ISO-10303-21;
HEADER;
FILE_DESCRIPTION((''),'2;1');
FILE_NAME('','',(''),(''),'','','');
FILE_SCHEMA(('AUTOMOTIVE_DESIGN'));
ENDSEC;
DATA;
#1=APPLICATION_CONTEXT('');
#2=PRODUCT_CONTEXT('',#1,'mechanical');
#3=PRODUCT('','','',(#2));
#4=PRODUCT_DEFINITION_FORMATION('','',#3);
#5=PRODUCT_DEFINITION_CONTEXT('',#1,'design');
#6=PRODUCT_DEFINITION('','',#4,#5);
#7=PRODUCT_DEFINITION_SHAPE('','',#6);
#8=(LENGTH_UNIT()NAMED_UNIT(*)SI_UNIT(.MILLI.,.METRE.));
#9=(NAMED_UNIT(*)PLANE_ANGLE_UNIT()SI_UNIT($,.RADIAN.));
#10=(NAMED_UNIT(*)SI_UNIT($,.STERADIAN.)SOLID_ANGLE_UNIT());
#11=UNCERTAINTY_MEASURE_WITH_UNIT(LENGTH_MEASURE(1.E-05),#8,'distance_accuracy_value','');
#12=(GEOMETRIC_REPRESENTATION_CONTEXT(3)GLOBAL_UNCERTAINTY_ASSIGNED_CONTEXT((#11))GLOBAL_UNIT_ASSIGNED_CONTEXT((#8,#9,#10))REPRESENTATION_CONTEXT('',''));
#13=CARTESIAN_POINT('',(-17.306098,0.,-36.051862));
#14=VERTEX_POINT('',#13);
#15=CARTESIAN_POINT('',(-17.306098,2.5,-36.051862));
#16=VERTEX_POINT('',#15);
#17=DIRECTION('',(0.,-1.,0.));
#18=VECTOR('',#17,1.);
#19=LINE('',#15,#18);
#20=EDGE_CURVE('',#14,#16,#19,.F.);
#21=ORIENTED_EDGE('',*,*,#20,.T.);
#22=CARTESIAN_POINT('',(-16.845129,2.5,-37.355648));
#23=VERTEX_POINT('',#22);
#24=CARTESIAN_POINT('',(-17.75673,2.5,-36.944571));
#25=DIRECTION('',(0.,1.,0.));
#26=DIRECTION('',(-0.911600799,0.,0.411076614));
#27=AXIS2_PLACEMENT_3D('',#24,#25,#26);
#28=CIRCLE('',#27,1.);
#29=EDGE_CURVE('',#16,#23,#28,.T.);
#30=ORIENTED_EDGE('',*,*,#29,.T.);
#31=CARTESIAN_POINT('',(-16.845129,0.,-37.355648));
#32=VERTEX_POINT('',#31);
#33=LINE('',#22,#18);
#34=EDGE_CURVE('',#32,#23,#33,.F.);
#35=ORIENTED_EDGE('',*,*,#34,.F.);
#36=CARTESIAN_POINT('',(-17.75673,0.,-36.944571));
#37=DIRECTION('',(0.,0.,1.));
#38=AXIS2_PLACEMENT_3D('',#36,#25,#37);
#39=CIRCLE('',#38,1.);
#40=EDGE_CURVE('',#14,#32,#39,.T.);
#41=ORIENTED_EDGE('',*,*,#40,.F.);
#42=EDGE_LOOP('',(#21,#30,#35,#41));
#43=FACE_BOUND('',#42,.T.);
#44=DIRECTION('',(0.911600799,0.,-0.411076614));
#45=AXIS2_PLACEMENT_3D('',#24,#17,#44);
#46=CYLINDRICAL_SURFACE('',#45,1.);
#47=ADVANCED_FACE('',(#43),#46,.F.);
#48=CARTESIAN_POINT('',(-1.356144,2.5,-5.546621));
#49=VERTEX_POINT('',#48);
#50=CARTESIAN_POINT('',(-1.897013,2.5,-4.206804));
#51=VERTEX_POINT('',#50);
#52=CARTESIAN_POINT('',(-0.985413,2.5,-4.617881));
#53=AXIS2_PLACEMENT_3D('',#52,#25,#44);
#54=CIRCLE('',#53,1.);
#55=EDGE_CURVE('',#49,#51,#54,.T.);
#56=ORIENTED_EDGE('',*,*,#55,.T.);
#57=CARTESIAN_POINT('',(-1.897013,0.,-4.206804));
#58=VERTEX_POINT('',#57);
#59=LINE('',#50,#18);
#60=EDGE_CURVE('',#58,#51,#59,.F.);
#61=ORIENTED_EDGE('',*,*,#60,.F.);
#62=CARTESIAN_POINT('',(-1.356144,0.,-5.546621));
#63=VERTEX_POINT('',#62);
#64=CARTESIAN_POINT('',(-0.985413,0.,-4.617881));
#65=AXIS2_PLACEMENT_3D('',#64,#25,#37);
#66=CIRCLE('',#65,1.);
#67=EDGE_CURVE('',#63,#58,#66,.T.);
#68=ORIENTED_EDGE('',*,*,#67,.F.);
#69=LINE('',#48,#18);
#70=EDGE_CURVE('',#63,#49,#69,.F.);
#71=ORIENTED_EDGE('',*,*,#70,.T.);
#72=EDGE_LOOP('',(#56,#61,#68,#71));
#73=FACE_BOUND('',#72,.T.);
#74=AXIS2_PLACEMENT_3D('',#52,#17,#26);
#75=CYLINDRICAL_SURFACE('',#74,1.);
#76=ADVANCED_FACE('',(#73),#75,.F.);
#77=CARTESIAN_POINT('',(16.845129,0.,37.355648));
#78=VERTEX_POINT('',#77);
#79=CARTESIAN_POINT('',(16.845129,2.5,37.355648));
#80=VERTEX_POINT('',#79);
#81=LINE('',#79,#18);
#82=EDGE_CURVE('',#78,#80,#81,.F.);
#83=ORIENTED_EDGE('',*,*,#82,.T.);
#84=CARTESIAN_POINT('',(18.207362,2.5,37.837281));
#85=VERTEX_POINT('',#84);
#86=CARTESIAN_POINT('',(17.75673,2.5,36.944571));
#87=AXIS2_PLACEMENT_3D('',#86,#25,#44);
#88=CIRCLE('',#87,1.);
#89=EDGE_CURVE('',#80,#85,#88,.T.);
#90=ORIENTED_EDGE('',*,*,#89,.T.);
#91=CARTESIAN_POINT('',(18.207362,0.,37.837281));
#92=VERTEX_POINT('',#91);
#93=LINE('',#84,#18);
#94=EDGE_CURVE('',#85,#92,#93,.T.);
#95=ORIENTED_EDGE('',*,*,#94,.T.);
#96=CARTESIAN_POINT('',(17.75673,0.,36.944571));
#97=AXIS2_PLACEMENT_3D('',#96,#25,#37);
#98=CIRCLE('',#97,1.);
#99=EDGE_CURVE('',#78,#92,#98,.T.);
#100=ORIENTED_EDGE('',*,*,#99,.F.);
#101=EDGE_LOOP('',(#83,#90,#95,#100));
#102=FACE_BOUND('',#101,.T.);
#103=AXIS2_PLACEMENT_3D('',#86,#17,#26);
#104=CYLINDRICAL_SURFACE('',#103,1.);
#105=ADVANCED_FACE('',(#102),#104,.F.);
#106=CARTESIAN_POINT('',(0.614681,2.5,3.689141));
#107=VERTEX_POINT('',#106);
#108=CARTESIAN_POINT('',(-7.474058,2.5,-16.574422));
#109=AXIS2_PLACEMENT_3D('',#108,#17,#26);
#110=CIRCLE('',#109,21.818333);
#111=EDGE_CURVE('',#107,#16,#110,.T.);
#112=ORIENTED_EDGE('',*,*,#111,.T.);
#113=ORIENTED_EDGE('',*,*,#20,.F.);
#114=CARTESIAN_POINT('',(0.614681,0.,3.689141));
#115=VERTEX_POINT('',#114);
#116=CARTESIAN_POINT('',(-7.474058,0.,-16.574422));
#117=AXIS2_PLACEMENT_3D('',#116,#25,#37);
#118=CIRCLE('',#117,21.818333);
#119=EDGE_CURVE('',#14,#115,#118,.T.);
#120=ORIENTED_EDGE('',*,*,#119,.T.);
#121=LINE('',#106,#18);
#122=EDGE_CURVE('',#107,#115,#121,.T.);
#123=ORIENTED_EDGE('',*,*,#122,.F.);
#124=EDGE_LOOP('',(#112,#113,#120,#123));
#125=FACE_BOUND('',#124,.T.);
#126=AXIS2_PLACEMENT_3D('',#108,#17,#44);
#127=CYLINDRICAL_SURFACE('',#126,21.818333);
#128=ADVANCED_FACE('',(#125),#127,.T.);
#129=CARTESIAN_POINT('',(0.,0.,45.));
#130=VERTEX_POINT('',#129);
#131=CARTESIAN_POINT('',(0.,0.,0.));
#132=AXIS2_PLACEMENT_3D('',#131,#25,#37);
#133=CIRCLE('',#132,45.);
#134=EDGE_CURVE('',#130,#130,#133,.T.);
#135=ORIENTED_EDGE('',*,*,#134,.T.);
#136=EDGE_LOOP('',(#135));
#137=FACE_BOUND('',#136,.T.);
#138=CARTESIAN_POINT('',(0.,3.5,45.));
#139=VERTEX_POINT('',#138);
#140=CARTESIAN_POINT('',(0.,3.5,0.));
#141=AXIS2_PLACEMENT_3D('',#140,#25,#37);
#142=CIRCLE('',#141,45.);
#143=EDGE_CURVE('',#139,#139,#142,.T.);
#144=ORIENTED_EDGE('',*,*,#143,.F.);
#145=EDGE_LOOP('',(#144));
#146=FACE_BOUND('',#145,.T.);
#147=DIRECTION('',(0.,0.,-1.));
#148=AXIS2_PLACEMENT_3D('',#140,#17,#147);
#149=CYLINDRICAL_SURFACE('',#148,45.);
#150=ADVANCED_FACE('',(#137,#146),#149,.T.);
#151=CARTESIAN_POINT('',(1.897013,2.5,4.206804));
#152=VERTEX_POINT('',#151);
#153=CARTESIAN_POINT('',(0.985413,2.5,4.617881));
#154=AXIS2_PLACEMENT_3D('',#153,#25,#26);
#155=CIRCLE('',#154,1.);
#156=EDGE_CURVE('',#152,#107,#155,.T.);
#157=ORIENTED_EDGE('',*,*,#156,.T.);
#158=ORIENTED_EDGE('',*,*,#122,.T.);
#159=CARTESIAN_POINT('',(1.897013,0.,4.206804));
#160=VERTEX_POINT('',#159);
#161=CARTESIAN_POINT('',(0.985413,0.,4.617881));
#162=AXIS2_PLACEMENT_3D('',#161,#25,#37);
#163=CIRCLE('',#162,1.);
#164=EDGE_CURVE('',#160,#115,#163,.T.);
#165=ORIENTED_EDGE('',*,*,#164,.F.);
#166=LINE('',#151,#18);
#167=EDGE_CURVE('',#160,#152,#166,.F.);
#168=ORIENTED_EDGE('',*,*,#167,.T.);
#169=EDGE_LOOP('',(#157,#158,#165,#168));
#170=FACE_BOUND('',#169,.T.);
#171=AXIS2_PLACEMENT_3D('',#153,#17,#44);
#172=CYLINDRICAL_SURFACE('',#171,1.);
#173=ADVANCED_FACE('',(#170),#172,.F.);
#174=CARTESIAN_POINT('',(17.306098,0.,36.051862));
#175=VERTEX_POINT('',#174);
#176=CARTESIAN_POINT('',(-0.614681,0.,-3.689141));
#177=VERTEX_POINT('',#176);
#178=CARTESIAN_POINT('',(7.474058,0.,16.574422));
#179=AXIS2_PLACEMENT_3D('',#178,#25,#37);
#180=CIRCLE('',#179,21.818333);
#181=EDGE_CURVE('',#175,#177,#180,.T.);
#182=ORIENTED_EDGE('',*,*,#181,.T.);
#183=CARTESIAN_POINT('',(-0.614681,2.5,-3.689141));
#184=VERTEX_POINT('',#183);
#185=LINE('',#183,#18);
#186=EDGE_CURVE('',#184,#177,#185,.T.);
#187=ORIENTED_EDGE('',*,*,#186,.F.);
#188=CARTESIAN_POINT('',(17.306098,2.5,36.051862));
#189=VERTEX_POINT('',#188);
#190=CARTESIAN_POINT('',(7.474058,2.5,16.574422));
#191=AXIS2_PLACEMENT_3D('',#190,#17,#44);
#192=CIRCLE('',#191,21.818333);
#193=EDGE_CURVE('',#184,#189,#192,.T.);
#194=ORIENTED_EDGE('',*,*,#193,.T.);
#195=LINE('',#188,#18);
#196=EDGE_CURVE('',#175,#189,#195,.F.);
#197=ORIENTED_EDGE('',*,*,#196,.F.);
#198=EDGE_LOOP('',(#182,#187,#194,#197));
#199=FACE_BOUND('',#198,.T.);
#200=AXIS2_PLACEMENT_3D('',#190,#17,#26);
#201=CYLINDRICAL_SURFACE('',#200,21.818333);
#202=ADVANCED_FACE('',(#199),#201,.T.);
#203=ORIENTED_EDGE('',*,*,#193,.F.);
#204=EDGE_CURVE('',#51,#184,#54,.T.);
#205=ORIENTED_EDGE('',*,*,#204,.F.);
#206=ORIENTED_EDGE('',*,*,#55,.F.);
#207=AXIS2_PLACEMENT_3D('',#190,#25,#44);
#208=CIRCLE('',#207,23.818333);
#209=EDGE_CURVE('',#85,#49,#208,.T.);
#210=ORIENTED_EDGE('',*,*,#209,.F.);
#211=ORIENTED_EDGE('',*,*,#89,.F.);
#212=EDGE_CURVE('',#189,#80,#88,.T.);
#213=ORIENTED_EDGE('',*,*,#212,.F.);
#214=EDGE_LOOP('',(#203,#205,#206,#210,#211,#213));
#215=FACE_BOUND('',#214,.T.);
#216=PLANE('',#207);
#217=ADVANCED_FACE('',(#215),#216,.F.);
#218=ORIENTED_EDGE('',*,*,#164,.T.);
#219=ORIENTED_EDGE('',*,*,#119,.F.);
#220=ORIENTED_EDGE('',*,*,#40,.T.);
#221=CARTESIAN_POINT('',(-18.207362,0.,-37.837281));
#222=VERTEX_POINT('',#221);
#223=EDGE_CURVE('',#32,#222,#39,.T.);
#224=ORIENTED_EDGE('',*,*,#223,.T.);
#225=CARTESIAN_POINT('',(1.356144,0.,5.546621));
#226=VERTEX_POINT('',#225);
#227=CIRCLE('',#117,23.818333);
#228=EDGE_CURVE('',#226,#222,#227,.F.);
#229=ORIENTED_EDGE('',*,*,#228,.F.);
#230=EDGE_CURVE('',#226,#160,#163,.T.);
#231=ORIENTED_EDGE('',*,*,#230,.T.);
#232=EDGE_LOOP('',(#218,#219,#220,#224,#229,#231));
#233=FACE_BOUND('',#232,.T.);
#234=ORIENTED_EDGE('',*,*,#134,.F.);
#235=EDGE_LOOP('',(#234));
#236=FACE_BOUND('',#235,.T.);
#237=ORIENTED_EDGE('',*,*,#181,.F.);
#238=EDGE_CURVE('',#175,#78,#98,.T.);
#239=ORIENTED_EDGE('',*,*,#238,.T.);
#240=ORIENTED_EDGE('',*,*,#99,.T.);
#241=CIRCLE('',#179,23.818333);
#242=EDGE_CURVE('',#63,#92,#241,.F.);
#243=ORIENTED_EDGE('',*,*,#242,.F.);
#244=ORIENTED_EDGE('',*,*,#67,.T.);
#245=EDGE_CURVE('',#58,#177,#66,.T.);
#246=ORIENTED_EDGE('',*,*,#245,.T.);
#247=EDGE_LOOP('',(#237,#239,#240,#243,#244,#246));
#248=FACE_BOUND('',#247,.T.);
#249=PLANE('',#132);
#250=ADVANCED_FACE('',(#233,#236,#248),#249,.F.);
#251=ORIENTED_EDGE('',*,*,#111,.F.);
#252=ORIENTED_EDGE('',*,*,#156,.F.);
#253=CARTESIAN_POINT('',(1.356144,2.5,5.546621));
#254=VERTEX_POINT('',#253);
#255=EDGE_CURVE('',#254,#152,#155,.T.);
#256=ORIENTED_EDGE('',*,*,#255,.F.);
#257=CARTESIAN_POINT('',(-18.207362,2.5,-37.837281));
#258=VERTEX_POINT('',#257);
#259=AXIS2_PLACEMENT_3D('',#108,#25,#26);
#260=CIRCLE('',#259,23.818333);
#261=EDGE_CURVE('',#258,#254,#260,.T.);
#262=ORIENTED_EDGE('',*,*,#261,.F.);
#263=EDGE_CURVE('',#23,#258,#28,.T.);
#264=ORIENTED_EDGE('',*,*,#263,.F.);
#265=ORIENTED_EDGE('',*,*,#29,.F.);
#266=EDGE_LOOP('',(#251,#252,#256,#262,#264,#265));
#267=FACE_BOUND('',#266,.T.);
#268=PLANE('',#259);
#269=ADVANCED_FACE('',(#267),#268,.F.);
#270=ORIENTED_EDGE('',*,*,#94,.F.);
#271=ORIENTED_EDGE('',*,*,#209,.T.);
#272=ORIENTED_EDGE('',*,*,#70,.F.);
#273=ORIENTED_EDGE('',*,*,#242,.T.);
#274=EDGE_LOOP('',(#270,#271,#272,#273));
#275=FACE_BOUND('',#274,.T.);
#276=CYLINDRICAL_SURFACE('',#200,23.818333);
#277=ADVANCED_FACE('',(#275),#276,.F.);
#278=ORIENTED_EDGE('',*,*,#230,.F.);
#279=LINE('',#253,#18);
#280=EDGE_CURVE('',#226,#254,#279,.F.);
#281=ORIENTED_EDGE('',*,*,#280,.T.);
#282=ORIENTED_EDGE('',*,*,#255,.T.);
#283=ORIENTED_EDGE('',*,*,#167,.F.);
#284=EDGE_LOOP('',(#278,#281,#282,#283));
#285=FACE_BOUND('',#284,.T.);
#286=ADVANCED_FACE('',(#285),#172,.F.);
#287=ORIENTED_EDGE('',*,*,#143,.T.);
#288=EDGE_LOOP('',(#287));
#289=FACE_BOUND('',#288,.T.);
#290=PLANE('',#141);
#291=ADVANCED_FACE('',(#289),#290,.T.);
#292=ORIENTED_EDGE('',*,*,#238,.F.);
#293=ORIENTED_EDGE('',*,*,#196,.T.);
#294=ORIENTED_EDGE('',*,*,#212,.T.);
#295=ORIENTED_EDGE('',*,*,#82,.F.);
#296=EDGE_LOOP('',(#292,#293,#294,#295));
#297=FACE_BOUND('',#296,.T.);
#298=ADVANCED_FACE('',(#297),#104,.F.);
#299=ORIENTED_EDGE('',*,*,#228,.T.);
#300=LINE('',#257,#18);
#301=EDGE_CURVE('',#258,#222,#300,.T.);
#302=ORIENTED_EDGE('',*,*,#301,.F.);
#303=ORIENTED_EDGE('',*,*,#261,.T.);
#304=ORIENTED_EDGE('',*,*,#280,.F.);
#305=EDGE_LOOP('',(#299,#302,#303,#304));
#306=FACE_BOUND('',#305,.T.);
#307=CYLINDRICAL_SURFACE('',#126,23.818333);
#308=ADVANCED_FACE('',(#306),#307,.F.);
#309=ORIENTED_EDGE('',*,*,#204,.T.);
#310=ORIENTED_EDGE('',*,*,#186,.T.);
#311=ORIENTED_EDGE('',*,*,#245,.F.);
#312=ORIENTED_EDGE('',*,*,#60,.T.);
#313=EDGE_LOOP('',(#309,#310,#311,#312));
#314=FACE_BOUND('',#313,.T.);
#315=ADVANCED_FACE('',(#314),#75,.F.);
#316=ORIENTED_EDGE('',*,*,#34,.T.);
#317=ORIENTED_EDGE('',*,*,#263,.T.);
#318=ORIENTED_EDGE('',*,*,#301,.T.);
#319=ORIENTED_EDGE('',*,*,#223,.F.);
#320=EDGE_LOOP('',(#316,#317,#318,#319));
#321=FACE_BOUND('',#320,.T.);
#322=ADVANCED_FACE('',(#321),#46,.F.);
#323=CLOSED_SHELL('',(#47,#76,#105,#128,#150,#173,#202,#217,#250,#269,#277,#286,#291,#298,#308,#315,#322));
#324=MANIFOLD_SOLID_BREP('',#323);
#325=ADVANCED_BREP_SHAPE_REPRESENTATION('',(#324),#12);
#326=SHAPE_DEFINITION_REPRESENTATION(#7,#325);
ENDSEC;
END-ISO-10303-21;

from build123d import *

# Parameters (mm, degrees)
SKETCH1_R           = 45
BOSS_EXTRUDE1_DEPTH = 3.5
CAVITY1_DEPTH       = 2.5


# Read off the part's stored shape, not the designer's step: Cavity1
with BuildPart() as part:
    # Sketch1 → Boss-Extrude1 (new body)
    with BuildSketch(Plane(origin=(0, 0, 0), x_dir=(1, 0, 0), z_dir=(0, 1, 0))):
        with Locations(Location((0, 0, 0), (0, 0, 270))):
            Circle(SKETCH1_R)
    extrude(amount=BOSS_EXTRUDE1_DEPTH)

    # Cavity1 outline → Cavity1 (cut)
    with BuildSketch(Plane(origin=(0, 0, 0), x_dir=(1, 0, 0), z_dir=(0, 1, 0))):
        with BuildLine():
            ThreePointArc((-1.897013309, 4.206804256), (-1.35975038, 3.69058849), (-0.614681205, 3.689140702))
            ThreePointArc((-0.614681205, 3.689140702), (27.363668078, -7.605415279), (17.306098008, -36.05186159))
            ThreePointArc((17.306098008, -36.05186159), (16.813923428, -36.611231194), (16.845129248, -37.355647991))
            ThreePointArc((16.845129248, -37.355647991), (17.423389863, -37.887377997), (18.207362086, -37.837281165))
            ThreePointArc((18.207362086, -37.837281165), (29.186869676, -6.783262051), (-1.356143814, 5.546621038))
            ThreePointArc((-1.356143814, 5.546621038), (-1.91270489, 4.992218741), (-1.897013309, 4.206804256))
        make_face()
        with BuildLine():
            ThreePointArc((1.897013309, -4.206804256), (1.35975038, -3.69058849), (0.614681205, -3.689140702))
            ThreePointArc((0.614681205, -3.689140702), (-27.363668078, 7.605415279), (-17.306098008, 36.05186159))
            ThreePointArc((-17.306098008, 36.05186159), (-16.813923428, 36.611231194), (-16.845129248, 37.355647991))
            ThreePointArc((-16.845129248, 37.355647991), (-17.423389863, 37.887377997), (-18.207362086, 37.837281165))
            ThreePointArc((-18.207362086, 37.837281165), (-29.186869676, 6.783262051), (1.356143814, -5.546621038))
            ThreePointArc((1.356143814, -5.546621038), (1.91270489, -4.992218741), (1.897013309, -4.206804256))
        make_face()
    extrude(amount=CAVITY1_DEPTH, mode=Mode.SUBTRACT)


solid = part.part
